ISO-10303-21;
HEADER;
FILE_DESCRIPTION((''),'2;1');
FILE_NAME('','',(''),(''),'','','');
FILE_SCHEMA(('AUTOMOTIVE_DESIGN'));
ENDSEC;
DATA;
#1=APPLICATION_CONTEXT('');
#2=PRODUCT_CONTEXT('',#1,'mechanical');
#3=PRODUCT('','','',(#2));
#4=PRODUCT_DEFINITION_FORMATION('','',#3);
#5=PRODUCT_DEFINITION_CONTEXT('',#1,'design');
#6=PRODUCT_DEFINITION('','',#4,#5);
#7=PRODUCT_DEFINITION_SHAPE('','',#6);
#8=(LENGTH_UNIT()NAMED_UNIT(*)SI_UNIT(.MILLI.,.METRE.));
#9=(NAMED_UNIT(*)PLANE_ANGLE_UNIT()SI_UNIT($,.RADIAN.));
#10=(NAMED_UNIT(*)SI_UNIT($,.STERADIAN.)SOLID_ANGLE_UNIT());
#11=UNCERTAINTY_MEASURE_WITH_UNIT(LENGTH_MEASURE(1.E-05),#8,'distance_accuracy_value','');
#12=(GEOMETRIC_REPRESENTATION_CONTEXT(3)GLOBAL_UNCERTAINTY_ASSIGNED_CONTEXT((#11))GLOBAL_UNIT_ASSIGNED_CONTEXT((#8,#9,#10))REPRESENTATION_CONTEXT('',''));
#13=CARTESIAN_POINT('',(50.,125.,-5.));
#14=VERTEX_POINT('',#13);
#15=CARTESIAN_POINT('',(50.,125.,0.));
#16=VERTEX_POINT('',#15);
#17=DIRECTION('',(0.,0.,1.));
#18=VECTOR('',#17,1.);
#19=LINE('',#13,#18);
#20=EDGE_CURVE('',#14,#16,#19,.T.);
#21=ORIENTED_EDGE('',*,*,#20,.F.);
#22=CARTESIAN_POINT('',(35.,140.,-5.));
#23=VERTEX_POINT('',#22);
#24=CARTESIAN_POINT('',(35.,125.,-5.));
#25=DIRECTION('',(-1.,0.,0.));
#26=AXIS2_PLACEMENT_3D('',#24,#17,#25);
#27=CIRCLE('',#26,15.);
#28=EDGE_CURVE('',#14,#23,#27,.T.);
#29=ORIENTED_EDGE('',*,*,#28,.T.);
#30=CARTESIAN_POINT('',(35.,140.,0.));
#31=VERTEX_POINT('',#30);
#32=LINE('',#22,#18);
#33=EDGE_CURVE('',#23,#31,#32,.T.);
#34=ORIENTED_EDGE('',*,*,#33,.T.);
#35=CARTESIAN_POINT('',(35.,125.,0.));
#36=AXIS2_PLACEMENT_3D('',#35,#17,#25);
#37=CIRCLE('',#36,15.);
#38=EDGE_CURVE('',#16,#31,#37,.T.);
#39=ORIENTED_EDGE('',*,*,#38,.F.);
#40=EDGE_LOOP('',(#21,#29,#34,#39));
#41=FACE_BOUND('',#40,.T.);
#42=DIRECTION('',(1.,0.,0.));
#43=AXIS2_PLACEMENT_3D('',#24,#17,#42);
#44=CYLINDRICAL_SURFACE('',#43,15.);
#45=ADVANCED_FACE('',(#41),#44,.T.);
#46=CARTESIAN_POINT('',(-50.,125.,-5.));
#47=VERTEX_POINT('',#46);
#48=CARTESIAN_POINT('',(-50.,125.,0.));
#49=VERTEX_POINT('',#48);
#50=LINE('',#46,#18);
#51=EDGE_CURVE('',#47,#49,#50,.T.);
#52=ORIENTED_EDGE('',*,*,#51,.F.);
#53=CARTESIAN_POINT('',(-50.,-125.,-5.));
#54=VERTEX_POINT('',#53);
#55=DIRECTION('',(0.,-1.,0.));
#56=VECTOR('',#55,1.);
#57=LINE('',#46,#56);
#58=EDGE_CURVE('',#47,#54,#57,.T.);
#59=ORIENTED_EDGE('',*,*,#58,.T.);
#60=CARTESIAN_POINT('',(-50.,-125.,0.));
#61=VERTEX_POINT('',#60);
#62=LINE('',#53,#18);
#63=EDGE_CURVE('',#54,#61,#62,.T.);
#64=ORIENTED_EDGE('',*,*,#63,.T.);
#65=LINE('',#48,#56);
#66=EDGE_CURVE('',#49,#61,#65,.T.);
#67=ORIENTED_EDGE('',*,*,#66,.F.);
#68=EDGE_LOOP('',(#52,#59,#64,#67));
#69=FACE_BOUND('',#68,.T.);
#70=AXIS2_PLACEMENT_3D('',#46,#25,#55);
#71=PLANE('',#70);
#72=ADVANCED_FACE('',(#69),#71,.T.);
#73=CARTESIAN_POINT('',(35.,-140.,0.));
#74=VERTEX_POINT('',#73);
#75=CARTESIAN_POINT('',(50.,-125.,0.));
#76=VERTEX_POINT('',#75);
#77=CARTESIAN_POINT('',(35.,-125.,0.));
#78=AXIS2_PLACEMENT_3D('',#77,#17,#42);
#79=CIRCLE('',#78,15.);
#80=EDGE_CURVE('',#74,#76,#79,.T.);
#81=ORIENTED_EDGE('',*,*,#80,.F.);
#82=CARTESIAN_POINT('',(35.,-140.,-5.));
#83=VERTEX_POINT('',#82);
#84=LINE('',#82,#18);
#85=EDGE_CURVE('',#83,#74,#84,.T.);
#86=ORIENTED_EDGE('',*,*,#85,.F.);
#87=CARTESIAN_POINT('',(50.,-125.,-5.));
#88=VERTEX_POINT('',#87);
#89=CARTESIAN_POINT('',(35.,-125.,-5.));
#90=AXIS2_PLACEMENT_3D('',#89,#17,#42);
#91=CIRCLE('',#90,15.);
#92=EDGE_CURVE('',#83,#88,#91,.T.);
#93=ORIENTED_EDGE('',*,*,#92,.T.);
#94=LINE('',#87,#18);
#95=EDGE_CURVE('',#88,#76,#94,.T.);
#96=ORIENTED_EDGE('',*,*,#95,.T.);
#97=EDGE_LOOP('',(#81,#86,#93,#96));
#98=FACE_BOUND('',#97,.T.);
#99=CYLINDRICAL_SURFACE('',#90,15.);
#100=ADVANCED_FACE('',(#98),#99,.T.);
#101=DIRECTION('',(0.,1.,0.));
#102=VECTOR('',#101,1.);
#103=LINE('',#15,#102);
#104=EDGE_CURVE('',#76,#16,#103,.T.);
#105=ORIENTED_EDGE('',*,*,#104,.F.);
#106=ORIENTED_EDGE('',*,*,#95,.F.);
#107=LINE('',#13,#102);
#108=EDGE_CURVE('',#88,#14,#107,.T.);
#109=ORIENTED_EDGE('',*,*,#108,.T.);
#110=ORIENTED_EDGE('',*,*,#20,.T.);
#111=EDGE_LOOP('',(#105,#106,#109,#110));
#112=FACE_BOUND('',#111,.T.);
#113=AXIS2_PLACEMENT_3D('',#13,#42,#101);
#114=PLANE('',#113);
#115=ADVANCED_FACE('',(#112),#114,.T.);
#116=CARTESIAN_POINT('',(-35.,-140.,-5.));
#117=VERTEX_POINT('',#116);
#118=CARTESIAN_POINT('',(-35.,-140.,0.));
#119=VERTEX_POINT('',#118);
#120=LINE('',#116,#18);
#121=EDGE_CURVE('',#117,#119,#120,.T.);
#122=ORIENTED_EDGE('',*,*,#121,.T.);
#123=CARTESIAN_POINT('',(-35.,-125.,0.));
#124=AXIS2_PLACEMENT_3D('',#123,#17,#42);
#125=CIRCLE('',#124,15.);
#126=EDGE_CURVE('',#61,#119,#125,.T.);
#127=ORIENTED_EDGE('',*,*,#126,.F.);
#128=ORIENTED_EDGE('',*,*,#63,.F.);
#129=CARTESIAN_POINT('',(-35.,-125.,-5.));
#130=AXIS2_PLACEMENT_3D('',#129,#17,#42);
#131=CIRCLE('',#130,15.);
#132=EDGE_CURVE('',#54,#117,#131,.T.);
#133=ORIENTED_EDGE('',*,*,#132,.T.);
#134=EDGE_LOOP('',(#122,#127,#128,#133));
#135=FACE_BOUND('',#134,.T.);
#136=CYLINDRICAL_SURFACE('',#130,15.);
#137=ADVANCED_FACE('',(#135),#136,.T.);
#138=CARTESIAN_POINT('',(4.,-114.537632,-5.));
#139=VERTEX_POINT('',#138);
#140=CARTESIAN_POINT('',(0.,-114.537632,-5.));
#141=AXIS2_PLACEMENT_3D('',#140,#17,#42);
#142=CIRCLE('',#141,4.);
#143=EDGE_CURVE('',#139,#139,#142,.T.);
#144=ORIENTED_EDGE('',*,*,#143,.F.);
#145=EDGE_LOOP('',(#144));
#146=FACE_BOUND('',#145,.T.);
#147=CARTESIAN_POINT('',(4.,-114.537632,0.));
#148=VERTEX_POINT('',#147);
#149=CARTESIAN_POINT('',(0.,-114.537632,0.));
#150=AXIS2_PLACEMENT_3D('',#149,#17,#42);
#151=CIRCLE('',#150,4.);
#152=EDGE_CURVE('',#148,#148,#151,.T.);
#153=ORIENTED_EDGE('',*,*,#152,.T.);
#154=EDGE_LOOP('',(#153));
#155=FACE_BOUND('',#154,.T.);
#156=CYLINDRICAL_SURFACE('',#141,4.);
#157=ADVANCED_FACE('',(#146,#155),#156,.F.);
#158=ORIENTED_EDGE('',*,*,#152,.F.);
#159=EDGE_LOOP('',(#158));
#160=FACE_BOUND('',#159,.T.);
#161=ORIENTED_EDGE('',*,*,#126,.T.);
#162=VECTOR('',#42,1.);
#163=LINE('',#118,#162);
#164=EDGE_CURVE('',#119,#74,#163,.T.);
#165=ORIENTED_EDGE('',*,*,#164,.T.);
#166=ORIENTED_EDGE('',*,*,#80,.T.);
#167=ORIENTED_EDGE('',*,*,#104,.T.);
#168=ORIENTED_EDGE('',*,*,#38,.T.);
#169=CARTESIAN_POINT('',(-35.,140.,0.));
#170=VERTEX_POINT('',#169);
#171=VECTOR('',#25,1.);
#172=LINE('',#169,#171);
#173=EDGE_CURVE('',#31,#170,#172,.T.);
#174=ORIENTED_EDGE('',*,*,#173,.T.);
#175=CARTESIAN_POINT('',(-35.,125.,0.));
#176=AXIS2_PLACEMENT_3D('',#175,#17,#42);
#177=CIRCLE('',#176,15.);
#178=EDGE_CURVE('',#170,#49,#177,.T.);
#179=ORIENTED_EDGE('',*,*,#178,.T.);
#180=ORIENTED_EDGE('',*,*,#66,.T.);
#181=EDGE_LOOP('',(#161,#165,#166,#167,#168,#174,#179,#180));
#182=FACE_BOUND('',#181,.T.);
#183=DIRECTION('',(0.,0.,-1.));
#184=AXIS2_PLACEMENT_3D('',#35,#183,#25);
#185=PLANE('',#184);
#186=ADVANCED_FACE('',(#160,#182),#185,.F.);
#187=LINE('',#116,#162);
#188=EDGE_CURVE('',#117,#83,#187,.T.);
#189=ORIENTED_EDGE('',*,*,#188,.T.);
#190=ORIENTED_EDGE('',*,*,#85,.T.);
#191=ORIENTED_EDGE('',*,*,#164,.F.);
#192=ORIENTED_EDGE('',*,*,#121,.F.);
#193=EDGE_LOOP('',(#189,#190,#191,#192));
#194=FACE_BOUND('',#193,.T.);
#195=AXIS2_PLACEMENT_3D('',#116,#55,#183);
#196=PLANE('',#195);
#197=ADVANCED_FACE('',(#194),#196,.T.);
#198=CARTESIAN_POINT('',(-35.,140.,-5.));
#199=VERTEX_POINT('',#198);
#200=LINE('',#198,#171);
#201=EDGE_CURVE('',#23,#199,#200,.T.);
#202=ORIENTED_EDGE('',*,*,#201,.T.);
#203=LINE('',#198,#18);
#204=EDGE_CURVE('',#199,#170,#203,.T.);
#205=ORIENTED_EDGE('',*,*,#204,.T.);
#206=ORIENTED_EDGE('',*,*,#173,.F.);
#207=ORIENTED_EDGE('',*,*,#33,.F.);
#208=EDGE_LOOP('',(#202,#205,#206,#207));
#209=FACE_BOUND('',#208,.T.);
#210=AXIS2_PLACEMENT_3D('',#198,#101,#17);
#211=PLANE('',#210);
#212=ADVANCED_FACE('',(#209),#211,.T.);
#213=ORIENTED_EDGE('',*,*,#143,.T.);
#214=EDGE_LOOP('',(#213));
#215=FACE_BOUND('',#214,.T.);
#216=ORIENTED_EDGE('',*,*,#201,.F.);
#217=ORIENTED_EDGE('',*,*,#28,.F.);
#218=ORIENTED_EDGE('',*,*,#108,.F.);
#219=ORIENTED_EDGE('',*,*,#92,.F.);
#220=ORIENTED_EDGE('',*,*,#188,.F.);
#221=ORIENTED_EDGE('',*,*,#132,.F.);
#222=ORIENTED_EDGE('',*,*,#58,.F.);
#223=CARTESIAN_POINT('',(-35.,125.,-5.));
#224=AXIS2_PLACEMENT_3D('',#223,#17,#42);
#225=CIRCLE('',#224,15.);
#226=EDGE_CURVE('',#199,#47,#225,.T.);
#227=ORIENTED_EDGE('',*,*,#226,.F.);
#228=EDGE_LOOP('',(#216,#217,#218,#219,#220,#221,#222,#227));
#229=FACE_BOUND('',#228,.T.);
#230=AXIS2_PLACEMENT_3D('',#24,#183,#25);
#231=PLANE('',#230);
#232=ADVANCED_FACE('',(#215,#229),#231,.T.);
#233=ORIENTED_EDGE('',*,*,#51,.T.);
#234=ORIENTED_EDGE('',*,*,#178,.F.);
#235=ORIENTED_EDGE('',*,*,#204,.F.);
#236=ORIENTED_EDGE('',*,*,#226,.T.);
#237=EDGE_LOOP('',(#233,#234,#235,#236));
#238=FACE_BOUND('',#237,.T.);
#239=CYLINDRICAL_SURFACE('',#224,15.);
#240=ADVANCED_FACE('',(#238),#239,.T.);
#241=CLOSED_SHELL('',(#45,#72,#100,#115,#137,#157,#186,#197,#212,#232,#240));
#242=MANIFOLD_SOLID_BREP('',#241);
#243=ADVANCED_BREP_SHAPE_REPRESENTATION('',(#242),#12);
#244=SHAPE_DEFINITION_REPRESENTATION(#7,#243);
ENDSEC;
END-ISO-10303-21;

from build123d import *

# Parameters (mm, degrees)
SKETCH1_R          = 4
BASE_FLANGE1_DEPTH = 5


# Sheet-metal steps are written as plain solids
with BuildPart() as part:
    # Sketch1 → Base-Flange1 (new body)
    with BuildSketch(Plane.XY):
        with BuildLine():
            Line((-35, 140), (35, 140))
            ThreePointArc((35, 140), (45.606601718, 135.606601718), (50, 125))
            Line((50, 125), (50, -125))
            ThreePointArc((50, -125), (45.606601718, -135.606601718), (35, -140))
            Line((35, -140), (-35, -140))
            ThreePointArc((-35, -140), (-45.606601718, -135.606601718), (-50, -125))
            Line((-50, -125), (-50, 125))
            ThreePointArc((-50, 125), (-45.606601718, 135.606601718), (-35, 140))
        make_face()
        with Locations((0, -114.537631935)):
            Circle(SKETCH1_R, mode=Mode.SUBTRACT)
    extrude(amount=-BASE_FLANGE1_DEPTH)


solid = part.part
